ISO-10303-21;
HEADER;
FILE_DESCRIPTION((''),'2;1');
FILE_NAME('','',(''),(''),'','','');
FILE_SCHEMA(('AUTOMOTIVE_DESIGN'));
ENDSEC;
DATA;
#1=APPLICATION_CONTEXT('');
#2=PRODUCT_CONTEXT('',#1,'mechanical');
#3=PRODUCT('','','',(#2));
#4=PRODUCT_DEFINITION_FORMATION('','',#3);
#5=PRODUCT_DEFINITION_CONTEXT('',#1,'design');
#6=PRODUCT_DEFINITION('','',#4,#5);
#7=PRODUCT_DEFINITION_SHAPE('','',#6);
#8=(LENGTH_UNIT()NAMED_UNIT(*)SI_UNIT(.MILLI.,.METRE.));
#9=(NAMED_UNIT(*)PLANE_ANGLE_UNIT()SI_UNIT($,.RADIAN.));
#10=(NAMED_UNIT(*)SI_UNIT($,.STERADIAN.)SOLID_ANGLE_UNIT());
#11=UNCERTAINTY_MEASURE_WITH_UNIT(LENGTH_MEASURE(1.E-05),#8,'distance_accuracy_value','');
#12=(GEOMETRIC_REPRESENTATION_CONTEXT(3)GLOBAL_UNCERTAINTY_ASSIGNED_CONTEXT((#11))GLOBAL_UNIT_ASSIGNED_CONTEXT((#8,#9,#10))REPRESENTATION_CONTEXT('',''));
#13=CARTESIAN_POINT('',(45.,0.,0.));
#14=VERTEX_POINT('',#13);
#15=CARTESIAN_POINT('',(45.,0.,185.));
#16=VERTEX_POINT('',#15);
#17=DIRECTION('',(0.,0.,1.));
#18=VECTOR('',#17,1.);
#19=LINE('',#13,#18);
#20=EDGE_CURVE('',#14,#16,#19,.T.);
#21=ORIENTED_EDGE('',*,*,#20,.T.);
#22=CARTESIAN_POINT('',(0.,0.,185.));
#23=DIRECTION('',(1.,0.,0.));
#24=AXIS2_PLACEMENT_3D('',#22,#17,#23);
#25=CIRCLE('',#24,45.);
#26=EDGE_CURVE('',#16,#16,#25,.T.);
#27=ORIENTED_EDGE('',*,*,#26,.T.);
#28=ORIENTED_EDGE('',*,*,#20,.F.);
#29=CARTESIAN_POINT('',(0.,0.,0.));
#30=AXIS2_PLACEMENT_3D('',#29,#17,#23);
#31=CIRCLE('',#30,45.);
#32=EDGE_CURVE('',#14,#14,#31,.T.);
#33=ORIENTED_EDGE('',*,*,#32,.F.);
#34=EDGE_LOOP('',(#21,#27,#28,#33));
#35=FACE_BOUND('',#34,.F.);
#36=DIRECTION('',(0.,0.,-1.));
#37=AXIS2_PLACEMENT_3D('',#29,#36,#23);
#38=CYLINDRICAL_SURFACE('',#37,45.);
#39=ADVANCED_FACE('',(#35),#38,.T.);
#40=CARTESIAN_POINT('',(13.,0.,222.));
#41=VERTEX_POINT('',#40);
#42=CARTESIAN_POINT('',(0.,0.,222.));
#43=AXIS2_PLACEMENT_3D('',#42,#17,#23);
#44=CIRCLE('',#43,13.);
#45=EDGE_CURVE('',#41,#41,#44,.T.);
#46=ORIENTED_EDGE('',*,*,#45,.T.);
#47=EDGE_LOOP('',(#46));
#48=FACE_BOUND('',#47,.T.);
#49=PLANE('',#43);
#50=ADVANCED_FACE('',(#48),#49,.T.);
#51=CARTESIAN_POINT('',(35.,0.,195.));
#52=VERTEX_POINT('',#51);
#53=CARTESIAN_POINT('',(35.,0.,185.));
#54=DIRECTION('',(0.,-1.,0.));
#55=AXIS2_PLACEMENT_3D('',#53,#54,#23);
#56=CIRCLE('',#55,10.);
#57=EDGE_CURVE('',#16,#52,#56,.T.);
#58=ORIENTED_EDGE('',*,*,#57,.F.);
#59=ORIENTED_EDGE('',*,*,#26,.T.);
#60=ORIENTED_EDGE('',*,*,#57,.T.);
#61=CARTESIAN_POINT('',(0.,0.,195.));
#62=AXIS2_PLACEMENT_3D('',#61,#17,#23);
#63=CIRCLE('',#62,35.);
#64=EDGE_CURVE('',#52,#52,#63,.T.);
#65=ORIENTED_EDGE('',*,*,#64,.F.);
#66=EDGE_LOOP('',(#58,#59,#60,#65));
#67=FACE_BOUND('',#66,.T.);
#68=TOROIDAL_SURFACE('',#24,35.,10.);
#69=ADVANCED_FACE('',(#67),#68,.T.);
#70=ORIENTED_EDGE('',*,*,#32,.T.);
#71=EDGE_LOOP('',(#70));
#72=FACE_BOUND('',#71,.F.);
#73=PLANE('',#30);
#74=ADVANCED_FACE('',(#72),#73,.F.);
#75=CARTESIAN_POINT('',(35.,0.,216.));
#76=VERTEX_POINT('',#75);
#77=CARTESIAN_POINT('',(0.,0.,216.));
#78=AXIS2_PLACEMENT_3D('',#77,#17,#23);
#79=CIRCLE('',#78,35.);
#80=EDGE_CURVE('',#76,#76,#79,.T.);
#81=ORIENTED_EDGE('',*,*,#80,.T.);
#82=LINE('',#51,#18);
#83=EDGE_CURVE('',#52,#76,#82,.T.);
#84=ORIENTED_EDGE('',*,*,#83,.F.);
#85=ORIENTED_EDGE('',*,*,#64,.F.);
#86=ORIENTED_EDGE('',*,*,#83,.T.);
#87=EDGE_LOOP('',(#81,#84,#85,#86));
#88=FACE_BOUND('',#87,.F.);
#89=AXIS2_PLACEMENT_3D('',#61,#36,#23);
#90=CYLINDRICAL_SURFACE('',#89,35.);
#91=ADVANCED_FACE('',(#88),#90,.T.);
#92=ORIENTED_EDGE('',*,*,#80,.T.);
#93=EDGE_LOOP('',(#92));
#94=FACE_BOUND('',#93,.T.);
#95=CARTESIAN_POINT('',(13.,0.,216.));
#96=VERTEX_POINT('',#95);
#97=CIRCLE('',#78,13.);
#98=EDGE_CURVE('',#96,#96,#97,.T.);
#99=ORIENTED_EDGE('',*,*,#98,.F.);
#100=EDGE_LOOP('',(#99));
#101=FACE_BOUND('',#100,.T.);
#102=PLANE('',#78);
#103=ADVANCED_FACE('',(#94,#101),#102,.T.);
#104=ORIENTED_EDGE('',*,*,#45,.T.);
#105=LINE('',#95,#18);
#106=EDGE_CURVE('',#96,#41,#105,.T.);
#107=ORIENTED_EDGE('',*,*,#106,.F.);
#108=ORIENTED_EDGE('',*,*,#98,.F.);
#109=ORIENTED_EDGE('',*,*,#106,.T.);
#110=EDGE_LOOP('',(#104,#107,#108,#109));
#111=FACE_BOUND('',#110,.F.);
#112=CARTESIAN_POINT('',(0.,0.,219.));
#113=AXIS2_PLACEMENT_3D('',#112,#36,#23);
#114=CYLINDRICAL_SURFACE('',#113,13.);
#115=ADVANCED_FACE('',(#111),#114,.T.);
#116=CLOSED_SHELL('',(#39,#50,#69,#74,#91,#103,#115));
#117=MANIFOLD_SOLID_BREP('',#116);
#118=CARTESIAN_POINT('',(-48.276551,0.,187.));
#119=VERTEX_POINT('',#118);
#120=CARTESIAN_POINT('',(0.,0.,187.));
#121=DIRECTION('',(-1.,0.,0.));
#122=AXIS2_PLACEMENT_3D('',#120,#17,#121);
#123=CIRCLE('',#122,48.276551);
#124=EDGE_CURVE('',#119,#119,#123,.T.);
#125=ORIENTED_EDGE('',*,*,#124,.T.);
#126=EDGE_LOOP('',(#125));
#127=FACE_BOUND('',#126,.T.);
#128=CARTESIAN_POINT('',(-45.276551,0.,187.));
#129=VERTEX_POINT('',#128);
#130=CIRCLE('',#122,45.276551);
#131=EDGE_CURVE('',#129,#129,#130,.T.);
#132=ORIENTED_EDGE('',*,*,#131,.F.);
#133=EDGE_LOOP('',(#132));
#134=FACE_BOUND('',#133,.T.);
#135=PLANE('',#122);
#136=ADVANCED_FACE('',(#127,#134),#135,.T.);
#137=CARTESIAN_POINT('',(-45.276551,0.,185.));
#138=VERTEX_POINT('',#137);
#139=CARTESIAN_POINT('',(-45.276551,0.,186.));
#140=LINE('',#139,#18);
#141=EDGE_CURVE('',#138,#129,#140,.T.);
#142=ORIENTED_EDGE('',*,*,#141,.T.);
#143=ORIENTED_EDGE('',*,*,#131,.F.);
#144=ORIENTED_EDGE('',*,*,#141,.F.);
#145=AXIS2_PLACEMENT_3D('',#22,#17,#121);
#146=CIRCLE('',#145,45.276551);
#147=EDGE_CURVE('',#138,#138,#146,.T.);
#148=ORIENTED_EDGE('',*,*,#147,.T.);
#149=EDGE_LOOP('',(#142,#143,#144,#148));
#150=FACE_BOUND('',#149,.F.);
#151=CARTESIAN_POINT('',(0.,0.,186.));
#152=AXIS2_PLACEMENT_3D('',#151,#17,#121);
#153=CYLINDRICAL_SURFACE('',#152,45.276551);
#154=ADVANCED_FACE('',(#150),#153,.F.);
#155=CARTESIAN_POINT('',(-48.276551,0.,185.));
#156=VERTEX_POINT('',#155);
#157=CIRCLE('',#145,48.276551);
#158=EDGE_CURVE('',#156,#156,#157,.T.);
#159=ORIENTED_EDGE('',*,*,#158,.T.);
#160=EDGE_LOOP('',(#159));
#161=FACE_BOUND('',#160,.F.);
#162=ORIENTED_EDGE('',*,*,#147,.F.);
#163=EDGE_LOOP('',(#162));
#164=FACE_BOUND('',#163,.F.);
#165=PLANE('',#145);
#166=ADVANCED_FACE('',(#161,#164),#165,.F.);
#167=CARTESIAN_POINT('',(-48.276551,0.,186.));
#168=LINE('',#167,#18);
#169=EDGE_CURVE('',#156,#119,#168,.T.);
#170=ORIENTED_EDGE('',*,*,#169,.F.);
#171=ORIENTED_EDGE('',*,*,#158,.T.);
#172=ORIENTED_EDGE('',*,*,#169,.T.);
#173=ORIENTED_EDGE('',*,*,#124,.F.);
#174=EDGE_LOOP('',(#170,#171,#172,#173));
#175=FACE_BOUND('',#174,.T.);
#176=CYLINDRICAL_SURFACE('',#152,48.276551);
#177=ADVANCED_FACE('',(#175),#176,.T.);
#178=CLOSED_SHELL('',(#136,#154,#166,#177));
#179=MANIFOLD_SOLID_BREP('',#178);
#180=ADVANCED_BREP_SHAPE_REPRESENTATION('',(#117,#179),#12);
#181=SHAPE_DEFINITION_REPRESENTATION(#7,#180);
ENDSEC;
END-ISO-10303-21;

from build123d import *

# Parameters (mm, degrees)
F0_R      = 45
F1_DEPTH  = 195
F2_R      = 10
F3_R      = 35
F4_DEPTH  = 21
F5_W      = 3
F5_H      = 2
F7_R      = 13
F8_DEPTH  = 3
F9_R      = 13
F10_DEPTH = 3


with BuildPart() as f1:
    # F0 (on Top) → F1 (new body)
    with BuildSketch(Plane.XY):
        Circle(F0_R)
    extrude(amount=F1_DEPTH)

    # F2
    f2_edges = [f1.edges().sort_by_distance(p)[0] for p in [
        (-45, 0, 195),
    ]]
    fillet(f2_edges, radius=F2_R)

    # F3 (on face) → F4 (join)
    with BuildSketch(Plane.XY.offset(195)):
        Circle(F3_R)
    extrude(amount=F4_DEPTH)

    # F7 (on face) → F8 (join)
    with BuildSketch(Plane.XY.offset(216)):
        Circle(F7_R)
    extrude(amount=F8_DEPTH)

    # F9 (on face) → F10 (join)
    with BuildSketch(Plane.XY.offset(219)):
        Circle(F9_R)
    extrude(amount=F10_DEPTH)


with BuildPart() as f6:
    # F5 (on Front) → F6 (revolve)
    with BuildSketch(Plane.XZ):
        with Locations((-46.7765510678, 186)):
            Rectangle(F5_W, F5_H)
    revolve(axis=Axis((0, 0, 185), (0, 0, 1)))


solid = Compound([f1.part, f6.part])
